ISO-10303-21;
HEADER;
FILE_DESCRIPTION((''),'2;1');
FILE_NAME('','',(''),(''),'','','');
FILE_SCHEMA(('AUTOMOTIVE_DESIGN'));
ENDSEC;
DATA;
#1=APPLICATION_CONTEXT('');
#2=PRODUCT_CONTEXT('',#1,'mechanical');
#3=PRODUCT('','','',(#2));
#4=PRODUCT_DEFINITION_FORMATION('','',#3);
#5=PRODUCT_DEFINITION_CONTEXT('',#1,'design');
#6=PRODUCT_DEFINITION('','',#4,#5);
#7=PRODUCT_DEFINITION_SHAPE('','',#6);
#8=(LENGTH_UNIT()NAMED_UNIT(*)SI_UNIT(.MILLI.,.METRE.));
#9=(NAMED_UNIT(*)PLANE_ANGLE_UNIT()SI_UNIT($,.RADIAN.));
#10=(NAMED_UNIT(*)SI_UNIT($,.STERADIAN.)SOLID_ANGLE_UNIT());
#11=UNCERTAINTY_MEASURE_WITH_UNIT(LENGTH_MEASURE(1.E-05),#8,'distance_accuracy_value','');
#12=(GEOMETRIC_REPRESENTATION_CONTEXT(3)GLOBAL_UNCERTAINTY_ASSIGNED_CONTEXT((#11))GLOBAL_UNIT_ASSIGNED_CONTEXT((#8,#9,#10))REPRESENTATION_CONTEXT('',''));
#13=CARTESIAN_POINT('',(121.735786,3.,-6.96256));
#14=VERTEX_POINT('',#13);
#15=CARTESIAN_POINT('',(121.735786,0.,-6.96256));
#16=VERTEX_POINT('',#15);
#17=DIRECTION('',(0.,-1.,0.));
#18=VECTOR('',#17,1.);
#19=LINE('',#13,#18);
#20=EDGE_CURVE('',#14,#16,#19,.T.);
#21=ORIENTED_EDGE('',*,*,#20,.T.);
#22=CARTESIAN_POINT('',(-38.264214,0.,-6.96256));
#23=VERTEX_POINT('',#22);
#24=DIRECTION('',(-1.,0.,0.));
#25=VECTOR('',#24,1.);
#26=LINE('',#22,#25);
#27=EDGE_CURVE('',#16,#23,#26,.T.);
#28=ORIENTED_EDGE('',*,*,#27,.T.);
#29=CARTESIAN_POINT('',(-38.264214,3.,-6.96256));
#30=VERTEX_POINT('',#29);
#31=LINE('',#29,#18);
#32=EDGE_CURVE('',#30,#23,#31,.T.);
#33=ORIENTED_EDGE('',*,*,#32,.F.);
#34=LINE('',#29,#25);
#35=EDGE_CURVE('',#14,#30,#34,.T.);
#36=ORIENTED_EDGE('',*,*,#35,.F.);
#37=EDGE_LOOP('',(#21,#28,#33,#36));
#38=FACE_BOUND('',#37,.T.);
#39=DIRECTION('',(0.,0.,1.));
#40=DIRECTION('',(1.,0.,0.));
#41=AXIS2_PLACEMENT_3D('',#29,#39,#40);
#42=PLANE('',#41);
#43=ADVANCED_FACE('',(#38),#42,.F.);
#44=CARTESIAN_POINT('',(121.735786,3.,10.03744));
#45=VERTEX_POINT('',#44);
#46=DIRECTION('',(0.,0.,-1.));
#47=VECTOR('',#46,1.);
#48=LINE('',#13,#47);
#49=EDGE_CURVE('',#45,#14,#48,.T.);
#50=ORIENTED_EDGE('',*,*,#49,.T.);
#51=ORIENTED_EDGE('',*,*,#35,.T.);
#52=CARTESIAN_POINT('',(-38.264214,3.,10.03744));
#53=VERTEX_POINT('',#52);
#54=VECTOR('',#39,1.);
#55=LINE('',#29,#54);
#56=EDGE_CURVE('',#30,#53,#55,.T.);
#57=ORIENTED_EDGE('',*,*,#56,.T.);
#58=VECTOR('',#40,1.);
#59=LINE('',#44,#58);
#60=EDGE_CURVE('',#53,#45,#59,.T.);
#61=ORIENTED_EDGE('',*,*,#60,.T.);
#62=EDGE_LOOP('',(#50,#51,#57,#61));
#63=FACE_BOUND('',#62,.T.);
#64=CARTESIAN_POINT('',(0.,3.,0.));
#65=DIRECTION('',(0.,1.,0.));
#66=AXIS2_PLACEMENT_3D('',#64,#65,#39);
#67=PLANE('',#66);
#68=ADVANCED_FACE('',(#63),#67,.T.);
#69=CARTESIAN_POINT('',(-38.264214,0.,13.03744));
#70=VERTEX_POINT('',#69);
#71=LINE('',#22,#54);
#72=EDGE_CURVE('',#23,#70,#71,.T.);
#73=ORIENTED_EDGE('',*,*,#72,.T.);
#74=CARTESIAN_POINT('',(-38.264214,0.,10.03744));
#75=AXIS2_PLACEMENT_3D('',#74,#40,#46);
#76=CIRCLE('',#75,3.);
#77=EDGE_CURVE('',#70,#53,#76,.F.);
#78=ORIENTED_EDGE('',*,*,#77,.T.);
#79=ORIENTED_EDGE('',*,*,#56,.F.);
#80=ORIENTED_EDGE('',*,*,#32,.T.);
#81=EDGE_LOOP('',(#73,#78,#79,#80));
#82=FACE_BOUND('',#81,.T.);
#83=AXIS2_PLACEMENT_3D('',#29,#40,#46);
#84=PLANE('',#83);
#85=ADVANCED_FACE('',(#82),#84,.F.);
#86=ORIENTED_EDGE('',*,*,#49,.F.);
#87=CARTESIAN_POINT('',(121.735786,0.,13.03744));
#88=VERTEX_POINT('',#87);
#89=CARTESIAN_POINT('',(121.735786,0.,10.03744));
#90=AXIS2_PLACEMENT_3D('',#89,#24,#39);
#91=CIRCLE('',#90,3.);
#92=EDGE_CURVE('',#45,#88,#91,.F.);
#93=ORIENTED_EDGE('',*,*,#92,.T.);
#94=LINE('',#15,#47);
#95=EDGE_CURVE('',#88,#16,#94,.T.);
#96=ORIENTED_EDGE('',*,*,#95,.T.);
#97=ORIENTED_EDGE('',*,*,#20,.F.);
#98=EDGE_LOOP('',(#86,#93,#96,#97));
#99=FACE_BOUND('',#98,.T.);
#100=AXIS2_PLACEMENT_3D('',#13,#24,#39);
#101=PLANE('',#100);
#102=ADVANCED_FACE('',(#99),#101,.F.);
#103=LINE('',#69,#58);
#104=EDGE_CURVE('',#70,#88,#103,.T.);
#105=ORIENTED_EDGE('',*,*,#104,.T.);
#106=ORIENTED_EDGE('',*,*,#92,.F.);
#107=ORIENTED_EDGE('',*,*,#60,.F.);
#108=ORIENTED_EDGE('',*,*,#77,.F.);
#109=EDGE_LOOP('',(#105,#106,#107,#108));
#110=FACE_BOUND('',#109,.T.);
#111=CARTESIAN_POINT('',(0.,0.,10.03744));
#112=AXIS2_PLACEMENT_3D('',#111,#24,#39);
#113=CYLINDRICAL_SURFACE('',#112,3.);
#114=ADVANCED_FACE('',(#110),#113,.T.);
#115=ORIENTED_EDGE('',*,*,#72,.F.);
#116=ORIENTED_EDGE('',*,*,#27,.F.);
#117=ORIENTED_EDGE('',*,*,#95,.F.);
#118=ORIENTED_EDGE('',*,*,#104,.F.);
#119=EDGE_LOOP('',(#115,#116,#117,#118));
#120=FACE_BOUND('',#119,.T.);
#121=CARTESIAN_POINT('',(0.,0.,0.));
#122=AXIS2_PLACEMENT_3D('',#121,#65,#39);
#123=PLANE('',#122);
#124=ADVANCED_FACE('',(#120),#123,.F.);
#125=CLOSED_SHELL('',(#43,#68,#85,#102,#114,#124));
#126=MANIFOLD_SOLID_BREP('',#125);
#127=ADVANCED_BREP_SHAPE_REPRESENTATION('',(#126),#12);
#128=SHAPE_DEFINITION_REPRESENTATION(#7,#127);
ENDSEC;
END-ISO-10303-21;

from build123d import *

# Parameters (mm, degrees)
ESBO_O1_W                = 160
ESBO_O1_H                = 20
RESSALTO_EXTRUS_O1_DEPTH = 3
FILETE2_R                = 3


with BuildPart() as part:
    # Esboço1 → Ressalto-extrusão1 (new body)
    with BuildSketch(Plane(origin=(0, 0, 0), x_dir=(1, 0, 0), z_dir=(0, 1, 0))):
        with Locations((41.735785703, -3.037439614)):
            Rectangle(ESBO_O1_W, ESBO_O1_H)
    extrude(amount=RESSALTO_EXTRUS_O1_DEPTH)

    # Filete2
    filete2_edges = [part.edges().sort_by_distance(p)[0] for p in [
        (41.735785703, 3, 13.037439614),
    ]]
    fillet(filete2_edges, radius=FILETE2_R - 0.0001)  # a hair under: the kernel refuses the full size


solid = part.part
